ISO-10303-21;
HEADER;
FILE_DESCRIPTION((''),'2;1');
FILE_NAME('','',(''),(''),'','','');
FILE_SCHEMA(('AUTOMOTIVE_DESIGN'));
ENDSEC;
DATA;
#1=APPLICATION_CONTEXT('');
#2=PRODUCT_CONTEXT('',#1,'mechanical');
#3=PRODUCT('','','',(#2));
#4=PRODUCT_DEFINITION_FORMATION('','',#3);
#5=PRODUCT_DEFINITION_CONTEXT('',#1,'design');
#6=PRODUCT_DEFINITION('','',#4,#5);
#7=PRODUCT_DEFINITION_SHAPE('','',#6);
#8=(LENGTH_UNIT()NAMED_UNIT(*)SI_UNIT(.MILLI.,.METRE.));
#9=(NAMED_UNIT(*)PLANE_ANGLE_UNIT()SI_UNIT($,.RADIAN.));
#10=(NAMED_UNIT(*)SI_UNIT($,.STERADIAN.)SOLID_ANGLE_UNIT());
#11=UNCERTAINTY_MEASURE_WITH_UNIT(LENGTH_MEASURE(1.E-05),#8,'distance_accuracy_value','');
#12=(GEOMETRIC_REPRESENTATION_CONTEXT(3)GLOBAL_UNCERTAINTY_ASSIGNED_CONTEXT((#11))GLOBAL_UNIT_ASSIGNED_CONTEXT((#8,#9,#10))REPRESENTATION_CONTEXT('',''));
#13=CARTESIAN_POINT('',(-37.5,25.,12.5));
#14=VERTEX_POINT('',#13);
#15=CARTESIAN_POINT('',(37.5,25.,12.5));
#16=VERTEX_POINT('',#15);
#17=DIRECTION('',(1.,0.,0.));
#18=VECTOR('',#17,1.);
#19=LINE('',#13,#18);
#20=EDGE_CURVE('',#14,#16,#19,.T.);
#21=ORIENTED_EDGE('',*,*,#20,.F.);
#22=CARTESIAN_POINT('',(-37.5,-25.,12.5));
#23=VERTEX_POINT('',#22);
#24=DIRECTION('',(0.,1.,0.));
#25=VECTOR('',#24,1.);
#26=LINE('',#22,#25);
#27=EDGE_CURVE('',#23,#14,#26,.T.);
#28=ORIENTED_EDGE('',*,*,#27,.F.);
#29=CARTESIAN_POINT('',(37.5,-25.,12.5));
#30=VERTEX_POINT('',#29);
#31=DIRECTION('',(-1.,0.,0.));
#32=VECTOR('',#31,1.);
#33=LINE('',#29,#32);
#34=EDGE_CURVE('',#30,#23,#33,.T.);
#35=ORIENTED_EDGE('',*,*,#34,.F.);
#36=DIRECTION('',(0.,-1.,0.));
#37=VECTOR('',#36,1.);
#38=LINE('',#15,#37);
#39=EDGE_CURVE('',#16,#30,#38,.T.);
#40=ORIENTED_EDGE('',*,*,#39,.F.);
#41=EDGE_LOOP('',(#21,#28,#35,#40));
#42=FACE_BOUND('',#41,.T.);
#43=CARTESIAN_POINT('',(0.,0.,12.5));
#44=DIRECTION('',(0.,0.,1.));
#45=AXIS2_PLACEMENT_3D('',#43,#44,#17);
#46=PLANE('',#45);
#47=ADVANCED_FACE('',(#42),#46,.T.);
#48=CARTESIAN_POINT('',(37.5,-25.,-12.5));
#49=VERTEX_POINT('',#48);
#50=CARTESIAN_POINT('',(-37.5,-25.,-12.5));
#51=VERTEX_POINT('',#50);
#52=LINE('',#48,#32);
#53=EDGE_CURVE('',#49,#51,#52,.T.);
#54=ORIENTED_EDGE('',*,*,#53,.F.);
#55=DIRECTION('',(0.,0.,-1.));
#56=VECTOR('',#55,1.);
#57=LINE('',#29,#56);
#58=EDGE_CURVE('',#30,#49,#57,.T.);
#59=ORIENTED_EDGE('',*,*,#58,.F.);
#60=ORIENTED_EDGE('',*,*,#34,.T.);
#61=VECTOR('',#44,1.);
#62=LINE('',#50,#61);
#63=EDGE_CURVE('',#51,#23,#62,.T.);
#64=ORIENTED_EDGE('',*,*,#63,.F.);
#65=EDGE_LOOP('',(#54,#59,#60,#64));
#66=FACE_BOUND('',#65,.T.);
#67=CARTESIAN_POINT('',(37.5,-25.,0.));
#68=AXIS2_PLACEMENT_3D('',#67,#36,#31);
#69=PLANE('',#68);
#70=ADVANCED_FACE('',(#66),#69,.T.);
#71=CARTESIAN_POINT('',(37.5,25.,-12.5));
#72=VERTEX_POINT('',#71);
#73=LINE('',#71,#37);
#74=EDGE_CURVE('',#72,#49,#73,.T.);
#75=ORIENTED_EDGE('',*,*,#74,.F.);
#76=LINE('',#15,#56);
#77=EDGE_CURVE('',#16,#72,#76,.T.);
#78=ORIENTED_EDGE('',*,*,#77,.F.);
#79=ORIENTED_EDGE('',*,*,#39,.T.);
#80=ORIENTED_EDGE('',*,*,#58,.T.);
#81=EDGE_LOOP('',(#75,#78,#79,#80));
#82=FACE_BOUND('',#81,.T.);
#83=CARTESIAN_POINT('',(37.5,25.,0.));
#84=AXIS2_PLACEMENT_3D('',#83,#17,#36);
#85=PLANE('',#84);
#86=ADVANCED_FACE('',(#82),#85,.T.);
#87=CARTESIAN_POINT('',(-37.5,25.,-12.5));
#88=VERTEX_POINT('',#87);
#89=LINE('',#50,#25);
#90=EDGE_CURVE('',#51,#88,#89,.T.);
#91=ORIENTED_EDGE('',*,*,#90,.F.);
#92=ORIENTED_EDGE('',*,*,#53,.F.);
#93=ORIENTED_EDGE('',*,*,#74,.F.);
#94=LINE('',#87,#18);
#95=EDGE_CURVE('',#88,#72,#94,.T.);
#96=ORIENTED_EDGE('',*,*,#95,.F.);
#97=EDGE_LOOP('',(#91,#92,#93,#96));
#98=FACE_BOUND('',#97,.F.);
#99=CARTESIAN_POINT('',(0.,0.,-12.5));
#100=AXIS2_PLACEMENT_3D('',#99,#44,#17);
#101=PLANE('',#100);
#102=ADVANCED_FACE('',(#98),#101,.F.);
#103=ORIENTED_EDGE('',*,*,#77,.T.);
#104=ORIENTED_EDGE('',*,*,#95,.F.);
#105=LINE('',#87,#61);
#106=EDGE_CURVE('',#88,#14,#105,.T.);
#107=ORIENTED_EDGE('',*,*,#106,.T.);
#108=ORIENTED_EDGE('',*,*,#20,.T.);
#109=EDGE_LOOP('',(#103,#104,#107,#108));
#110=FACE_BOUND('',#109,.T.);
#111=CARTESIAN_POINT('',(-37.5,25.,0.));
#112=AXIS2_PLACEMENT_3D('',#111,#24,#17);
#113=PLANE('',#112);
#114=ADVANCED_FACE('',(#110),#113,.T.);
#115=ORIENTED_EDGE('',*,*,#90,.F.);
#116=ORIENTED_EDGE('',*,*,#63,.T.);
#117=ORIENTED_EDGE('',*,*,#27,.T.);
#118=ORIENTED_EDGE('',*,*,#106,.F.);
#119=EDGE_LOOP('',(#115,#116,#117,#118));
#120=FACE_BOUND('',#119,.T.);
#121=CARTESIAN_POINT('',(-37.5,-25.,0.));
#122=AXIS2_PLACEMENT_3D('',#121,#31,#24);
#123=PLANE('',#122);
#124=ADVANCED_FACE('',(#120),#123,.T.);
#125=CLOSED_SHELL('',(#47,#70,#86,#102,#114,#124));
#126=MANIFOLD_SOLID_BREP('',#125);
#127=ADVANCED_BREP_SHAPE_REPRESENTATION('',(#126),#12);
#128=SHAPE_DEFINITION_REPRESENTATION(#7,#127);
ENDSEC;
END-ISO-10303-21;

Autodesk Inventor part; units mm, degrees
ref_plane "YZ Plane" through (0, 0, 0) normal (1, 0, 0) x (0, 1, 0)
ref_plane "XZ Plane" through (0, 0, 0) normal (0, 1, 0) x (-1, 0, 0)
ref_plane "XY Plane" through (0, 0, 0) normal (0, 0, 1) x (1, 0, 0)
sketch "Sketch1" plane through (0, 0, 0) normal (0, 0, 1) x (1, 0, 0)
  line L0 (0, 0) -> (-37.5, 25) construction
  line L1 (0, 0) -> (37.5, -25) construction
  line L2 (-37.5, 25) -> (37.5, 25)
  line L3 (37.5, 25) -> (37.5, -25)
  line L4 (37.5, -25) -> (-37.5, -25)
  line L5 (-37.5, -25) -> (-37.5, 25)
  point P0 (0, 0)
extrude "Extrusion1" add sketch "Sketch1" along normal mid plane 25
properties part number "Block, Center Constrained (mm)" material "Steel, MS"
